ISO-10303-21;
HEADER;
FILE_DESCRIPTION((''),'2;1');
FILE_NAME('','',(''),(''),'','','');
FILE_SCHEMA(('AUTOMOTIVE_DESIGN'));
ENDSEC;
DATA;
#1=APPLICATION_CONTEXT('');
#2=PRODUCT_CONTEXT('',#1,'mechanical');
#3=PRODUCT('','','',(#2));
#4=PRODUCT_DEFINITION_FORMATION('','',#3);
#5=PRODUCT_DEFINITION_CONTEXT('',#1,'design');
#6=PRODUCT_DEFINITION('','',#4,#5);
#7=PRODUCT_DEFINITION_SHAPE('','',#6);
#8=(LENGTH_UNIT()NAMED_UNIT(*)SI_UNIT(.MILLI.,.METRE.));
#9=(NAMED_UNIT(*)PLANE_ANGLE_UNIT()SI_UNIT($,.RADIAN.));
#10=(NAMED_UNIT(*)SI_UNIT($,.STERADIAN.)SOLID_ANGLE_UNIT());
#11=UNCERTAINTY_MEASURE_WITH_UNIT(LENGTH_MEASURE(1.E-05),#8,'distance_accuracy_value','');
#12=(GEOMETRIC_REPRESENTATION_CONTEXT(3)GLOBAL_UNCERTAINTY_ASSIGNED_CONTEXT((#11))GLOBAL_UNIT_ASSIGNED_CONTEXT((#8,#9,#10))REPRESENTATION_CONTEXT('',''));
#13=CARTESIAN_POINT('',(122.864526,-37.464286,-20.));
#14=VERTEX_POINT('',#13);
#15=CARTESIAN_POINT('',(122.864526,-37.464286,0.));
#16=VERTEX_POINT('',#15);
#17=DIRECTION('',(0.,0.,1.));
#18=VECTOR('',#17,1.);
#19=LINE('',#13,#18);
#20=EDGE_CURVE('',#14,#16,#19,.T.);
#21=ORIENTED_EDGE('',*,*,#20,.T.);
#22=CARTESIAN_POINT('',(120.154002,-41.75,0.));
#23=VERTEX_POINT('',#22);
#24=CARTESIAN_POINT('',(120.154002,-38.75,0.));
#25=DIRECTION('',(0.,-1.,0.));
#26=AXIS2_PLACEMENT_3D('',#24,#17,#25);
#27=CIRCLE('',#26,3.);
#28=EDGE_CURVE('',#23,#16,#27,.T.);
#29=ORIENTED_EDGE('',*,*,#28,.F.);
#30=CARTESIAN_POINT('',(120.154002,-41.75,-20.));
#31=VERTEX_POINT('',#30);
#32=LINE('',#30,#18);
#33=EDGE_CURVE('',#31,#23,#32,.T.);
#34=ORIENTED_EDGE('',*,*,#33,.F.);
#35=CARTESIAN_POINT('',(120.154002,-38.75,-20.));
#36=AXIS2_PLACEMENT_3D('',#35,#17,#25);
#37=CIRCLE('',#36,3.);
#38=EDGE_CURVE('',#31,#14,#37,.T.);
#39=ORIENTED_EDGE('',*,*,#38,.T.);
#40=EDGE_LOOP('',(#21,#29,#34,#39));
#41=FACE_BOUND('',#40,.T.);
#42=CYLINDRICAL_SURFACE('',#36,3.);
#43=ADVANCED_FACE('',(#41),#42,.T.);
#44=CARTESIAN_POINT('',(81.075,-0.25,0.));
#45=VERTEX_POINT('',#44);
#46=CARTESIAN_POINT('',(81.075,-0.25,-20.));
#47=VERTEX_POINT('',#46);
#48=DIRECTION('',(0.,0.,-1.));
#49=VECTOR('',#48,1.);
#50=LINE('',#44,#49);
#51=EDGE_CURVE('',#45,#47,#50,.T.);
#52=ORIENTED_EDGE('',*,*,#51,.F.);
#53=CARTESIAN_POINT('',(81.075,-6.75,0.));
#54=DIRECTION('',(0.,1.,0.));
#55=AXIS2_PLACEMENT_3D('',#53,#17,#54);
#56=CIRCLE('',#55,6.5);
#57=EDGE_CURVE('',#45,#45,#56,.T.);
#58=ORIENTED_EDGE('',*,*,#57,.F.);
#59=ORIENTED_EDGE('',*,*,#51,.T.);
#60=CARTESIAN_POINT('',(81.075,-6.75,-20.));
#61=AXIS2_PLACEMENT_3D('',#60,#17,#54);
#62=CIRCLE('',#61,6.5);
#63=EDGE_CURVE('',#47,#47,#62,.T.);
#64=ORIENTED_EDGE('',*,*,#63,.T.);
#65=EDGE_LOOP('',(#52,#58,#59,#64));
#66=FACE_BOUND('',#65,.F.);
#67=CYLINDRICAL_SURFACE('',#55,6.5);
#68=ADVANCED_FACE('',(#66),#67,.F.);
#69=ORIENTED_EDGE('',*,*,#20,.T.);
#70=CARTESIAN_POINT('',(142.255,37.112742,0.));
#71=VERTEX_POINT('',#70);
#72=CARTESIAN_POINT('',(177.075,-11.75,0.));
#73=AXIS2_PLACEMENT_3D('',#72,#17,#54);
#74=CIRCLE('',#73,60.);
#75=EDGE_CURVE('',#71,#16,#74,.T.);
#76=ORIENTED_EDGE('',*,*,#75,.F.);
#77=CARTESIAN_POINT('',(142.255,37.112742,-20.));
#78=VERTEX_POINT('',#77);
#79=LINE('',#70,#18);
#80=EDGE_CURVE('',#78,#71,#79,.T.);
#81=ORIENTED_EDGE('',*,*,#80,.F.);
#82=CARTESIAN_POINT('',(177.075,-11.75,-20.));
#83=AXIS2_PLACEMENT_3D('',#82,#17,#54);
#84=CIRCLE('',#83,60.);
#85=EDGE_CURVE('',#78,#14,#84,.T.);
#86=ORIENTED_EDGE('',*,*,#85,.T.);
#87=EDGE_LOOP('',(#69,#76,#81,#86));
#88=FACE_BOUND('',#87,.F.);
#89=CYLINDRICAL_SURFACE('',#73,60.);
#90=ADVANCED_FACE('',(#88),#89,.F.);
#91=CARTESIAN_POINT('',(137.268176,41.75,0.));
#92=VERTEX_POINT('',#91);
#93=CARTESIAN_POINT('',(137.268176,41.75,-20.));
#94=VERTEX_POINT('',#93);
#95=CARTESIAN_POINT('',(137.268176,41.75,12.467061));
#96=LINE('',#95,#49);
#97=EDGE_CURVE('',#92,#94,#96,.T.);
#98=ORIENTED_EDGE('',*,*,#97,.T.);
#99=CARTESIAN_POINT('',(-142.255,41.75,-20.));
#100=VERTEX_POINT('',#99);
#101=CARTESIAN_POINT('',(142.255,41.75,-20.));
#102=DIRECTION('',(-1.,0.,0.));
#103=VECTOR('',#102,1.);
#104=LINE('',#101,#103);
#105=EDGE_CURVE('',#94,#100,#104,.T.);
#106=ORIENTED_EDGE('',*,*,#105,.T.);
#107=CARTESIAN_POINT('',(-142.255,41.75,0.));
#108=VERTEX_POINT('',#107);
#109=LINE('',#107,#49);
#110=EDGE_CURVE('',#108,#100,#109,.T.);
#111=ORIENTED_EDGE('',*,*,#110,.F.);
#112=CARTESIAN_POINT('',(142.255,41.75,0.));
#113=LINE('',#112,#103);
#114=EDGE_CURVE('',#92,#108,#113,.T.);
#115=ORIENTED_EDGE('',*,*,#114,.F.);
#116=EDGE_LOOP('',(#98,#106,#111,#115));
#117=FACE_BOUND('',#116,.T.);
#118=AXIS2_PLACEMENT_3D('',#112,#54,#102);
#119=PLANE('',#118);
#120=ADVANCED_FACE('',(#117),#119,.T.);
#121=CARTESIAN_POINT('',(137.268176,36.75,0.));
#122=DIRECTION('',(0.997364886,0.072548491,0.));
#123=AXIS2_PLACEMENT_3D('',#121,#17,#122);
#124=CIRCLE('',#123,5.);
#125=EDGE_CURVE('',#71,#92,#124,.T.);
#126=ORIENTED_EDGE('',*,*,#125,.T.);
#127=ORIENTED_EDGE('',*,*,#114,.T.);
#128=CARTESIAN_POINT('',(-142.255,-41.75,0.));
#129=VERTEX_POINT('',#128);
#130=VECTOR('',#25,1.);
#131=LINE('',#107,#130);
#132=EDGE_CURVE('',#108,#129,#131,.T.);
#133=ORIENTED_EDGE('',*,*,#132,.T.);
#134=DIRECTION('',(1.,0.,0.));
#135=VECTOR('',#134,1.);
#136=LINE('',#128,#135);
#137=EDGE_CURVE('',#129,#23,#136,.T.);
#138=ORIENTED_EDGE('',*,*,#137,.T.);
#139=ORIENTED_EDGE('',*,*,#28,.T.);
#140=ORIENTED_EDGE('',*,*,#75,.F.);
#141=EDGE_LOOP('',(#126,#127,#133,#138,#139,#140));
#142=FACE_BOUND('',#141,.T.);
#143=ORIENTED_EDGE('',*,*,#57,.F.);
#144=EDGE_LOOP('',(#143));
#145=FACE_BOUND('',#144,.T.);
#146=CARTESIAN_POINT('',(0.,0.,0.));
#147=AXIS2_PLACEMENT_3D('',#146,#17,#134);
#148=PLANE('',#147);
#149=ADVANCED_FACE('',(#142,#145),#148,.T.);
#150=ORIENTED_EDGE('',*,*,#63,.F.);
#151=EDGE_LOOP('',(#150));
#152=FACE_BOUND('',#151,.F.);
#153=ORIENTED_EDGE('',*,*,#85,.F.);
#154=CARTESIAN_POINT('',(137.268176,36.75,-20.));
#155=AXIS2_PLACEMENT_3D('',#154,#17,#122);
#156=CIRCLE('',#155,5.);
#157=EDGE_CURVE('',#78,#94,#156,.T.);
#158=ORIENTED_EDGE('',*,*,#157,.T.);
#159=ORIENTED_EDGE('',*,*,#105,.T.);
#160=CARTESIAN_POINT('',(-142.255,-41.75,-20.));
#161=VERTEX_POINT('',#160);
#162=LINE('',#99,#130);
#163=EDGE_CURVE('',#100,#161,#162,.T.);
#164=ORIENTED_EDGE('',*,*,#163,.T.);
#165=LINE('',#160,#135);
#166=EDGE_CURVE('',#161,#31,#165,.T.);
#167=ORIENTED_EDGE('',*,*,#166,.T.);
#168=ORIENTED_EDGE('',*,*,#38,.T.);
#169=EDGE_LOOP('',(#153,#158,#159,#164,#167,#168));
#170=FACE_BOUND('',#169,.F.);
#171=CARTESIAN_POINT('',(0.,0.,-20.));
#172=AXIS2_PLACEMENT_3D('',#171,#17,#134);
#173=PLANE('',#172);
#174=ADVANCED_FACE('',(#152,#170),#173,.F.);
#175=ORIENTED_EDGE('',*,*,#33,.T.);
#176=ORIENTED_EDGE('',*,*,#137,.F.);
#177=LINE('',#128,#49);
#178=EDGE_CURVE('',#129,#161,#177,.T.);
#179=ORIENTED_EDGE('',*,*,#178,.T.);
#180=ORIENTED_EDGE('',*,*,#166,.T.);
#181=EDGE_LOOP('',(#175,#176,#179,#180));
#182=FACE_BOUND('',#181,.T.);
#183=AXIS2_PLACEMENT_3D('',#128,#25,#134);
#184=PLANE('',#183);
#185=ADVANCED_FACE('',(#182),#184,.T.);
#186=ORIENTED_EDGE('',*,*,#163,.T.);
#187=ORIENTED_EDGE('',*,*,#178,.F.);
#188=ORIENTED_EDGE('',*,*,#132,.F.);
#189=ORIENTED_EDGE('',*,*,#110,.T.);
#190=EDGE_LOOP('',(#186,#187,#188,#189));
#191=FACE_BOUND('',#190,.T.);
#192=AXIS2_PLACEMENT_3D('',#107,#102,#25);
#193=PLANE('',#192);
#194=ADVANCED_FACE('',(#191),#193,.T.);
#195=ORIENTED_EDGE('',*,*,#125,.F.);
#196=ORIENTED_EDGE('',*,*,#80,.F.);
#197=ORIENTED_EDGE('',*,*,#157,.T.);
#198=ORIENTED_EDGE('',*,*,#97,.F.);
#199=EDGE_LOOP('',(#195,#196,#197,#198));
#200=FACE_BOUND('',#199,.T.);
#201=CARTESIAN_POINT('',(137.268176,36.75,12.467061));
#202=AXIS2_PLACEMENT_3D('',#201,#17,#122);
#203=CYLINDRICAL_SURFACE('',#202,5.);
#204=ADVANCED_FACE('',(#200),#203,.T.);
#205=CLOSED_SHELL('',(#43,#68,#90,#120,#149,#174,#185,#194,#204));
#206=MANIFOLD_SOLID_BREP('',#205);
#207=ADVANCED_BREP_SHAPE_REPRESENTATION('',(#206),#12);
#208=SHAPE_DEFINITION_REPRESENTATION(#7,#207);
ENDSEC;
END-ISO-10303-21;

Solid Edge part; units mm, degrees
sketch "Sketch1" plane through (0, 0, 0) normal (0, 0, 1) x (1, 0, 0)
  line L0 (-142.255, -41.75) -> (142.255, -41.75)
  line L1 (142.255, -41.75) -> (142.255, 41.75)
  line L2 (142.255, 41.75) -> (-142.255, 41.75)
  line L3 (-142.255, 41.75) -> (-142.255, -41.75)
extrude "Protrusion1" add sketch "Sketch1" against normal blind 20
sketch "Sketch2" plane through (0, 0, 0) normal (0, 0, 1) x (0, 1, 0)
  circle A0 centre (-6.75, -81.075) radius 6.5
  circle A1 centre (-11.75, -177.075) radius 60
extrude "ExtrudedCutout_1" cut sketch "Sketch2" against normal blind 20
fillet "Round_2" radius 3 1 edges at (125.1135, -41.75, -10)
fillet "Round_3" radius 5 1 edges at (142.255, 41.75, -10)
